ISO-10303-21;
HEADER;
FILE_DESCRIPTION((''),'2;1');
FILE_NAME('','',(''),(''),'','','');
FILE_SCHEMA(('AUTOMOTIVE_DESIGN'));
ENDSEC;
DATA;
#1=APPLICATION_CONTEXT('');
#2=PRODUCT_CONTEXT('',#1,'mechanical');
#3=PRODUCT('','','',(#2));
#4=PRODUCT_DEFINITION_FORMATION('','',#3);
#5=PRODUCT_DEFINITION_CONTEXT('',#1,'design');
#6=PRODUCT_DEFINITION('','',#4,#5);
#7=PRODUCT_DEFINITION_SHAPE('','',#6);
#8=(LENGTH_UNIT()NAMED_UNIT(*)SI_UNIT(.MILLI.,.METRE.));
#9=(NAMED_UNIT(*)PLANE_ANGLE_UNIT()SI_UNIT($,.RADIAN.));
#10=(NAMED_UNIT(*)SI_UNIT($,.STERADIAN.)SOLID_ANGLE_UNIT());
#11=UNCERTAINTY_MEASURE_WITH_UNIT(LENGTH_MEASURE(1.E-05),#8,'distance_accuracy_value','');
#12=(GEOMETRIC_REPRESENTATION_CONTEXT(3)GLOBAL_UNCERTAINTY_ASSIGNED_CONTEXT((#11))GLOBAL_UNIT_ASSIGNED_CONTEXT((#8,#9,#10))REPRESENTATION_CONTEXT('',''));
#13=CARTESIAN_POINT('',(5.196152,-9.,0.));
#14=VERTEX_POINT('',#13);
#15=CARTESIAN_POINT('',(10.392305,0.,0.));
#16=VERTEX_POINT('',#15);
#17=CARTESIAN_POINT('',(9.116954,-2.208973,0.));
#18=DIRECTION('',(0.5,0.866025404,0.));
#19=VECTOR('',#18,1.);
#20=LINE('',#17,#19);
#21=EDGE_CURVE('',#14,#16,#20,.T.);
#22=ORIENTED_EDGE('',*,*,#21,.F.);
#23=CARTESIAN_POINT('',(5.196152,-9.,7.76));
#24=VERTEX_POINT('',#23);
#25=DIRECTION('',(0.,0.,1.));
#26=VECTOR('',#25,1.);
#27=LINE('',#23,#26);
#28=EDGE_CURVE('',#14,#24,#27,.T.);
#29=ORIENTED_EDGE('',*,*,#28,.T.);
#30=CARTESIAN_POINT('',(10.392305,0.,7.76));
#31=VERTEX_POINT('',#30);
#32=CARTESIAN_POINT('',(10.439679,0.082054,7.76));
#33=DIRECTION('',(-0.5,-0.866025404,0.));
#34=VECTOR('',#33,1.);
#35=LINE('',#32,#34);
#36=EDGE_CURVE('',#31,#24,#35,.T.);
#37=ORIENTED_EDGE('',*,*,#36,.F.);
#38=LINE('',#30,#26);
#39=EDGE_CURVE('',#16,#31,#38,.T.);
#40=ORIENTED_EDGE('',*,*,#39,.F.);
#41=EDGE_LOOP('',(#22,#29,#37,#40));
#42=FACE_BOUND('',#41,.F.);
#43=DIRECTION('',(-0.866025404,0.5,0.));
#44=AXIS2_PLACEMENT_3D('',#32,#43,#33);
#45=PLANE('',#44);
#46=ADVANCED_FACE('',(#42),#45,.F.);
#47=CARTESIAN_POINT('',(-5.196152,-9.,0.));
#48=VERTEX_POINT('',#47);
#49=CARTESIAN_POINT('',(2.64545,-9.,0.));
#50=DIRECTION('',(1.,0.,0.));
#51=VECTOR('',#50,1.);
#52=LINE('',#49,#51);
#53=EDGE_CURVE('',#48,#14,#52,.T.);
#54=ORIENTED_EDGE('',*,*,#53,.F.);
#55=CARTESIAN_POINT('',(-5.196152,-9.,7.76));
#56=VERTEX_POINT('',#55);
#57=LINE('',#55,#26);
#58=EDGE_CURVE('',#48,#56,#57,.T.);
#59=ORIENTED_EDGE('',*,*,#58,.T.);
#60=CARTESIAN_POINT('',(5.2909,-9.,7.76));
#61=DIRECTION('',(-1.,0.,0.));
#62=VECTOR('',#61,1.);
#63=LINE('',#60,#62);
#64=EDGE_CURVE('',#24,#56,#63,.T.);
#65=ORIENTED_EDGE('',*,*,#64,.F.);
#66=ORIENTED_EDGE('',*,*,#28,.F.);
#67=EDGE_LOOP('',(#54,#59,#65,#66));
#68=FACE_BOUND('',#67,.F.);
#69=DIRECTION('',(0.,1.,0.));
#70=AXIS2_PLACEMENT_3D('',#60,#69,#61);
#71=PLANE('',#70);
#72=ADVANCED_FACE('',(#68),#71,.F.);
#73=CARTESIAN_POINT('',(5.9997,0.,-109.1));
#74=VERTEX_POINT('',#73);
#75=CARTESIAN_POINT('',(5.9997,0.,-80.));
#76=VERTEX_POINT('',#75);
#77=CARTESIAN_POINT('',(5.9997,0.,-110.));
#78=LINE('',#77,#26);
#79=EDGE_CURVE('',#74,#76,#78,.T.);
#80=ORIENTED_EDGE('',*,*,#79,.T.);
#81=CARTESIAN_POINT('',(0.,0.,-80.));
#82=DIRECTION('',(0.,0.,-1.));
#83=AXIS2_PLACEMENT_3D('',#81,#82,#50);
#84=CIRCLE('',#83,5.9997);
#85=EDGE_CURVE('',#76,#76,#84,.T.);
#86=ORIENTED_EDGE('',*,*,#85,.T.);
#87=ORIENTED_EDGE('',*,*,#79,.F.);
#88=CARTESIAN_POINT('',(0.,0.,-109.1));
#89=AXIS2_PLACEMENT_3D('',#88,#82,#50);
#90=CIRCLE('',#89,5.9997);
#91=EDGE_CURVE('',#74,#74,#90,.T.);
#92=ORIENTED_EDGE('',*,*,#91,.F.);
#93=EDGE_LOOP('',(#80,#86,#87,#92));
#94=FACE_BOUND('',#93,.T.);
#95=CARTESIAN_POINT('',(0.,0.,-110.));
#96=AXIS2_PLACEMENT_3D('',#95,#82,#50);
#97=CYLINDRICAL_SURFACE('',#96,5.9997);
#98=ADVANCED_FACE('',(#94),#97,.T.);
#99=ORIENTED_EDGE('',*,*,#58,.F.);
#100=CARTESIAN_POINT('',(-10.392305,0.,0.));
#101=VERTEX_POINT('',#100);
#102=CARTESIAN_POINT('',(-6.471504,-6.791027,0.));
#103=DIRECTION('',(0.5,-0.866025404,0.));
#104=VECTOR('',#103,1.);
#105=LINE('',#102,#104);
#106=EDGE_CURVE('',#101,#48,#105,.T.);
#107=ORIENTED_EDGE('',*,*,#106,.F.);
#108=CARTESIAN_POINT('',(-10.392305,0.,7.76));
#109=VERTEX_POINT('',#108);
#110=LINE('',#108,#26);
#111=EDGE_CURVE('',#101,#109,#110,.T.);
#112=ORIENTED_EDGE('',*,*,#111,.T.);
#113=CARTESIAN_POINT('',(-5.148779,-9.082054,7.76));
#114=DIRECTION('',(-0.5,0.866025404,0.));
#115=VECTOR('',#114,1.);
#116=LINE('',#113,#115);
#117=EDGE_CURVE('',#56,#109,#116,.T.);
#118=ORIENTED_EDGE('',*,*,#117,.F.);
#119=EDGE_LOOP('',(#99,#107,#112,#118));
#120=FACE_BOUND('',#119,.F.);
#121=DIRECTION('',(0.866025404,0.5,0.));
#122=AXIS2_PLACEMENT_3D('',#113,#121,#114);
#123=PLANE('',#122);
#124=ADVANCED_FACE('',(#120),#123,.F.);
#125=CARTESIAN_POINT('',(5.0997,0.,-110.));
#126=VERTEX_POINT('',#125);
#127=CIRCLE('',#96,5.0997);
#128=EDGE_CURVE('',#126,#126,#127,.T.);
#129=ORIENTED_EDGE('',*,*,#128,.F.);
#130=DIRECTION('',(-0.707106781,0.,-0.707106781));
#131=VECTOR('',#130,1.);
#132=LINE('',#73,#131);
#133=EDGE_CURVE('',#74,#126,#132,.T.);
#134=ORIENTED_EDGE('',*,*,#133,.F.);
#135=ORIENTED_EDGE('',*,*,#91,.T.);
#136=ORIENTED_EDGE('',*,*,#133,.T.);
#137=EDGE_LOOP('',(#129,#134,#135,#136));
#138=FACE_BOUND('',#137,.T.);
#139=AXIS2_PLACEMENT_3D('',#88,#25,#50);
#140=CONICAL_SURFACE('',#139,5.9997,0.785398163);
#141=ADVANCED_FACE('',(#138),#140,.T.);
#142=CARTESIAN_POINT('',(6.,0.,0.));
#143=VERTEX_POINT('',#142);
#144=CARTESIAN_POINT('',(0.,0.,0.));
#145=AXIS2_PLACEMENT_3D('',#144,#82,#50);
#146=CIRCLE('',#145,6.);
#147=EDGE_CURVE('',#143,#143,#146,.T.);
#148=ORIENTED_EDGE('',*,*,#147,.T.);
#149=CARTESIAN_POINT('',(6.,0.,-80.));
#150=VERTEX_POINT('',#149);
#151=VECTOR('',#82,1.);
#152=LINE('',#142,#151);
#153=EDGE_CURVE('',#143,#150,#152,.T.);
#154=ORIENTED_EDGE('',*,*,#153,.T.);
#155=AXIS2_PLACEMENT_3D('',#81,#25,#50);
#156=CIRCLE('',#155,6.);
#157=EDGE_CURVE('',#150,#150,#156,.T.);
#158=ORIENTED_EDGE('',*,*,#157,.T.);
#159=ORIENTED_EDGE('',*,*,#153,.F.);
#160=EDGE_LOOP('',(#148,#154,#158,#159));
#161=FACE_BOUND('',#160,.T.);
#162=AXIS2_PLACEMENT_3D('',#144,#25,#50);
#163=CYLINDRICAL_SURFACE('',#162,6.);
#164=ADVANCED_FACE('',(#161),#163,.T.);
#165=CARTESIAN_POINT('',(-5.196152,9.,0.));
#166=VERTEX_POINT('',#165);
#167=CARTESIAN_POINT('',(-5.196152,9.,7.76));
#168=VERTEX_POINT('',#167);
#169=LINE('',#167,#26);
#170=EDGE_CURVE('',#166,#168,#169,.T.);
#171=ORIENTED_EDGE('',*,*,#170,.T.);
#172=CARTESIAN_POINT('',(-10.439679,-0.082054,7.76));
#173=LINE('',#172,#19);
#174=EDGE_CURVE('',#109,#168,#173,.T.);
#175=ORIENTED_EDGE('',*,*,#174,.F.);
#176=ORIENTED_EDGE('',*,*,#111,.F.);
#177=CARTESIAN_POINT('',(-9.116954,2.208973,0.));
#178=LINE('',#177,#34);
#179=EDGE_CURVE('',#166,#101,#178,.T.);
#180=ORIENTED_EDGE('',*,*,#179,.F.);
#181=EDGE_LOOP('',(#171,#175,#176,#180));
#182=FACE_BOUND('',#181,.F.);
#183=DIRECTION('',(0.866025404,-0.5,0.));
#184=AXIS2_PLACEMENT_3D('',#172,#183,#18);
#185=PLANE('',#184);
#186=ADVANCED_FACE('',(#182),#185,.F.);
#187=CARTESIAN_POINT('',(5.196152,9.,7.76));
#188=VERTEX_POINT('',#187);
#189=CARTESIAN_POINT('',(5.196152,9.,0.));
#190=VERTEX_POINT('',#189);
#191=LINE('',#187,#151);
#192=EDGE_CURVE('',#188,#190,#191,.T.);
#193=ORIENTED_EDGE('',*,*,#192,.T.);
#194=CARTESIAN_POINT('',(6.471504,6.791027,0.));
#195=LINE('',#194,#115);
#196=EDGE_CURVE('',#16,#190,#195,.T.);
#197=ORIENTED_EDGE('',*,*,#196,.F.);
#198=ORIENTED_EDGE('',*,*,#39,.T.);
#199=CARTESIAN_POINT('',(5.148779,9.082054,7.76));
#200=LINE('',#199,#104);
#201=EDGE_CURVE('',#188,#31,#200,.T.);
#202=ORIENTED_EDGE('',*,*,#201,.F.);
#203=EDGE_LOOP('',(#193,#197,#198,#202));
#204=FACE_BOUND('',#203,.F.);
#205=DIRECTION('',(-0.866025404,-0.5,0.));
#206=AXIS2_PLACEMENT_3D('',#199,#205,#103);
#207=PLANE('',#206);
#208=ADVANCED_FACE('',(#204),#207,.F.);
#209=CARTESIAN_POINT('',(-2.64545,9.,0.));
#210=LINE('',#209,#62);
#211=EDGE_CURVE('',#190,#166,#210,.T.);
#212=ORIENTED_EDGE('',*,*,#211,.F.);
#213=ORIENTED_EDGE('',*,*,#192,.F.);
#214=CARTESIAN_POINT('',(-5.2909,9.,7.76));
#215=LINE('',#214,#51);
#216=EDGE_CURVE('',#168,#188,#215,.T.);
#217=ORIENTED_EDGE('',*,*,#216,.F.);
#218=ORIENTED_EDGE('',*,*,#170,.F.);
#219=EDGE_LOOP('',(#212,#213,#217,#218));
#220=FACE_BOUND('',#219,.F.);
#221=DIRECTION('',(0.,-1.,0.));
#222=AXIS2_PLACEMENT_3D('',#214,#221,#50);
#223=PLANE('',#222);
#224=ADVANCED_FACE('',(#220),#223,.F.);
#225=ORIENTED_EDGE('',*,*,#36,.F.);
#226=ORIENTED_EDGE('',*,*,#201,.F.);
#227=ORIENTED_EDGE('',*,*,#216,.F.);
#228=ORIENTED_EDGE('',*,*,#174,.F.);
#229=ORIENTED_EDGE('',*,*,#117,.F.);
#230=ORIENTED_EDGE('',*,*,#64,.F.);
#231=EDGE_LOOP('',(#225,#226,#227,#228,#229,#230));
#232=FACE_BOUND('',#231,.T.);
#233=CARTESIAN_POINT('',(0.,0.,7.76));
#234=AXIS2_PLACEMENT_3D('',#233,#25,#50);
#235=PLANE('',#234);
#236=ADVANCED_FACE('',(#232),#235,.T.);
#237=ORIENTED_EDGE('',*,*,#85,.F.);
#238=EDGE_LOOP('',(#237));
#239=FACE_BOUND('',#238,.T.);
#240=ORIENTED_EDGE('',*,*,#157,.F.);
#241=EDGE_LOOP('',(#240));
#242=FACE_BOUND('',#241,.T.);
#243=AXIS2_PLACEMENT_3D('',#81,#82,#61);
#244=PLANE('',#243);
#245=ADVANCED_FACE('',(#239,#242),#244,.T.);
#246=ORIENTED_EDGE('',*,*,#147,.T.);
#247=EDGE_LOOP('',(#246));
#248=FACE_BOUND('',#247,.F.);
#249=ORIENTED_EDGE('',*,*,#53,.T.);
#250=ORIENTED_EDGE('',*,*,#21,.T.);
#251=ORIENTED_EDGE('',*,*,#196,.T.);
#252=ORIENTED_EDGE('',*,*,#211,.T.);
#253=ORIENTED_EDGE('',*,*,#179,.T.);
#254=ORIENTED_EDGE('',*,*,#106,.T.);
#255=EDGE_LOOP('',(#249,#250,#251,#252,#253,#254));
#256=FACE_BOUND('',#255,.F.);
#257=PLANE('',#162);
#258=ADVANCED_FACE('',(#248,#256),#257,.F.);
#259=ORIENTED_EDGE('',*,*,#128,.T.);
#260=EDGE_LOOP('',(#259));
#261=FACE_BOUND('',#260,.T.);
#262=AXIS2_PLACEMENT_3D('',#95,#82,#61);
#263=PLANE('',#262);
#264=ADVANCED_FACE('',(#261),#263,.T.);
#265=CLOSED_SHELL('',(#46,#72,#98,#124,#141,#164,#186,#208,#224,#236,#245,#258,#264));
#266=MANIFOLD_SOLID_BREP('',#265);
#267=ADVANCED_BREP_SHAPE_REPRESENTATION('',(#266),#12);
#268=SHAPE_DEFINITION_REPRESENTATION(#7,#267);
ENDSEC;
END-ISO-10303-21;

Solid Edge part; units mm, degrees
sketch "Sketch1" plane through (0, 0, 0) normal (0, 0, 1) x (1, 0, 0)
  circle A0 centre (0, 0) radius 10.44
  dimension "D1" = 20.88
extrude "Protrusion1" add sketch "Sketch1" along normal blind 7.76
sketch "Sketch2" plane through (0, 0, 0) normal (0, 0, -1) x (1, 0, 0)
  circle A0 centre (0, 0) radius 6
extrude "Protrusion2" add sketch "Sketch2" along normal blind 110
sketch "Sketch3" plane through (0, 0, -110) normal (0, 0, -1) x (1, 0, 0)
  circle A0 centre (0, 0) radius 5.9997
extrude "Cutout1" cut sketch "Sketch3" against normal blind 30 flip side to cut
chamfer "Chamfer_1" distance 0.9 angle 45 1 edges at (-5.9997, 0, -110)
sketch "Sketch4" plane through (0, 0, 7.76) normal (0, 0, 1) x (1, 0, 0)
  line L0 (-5.2909, 9) -> (5.2909, 9)
  dimension "D1" = 18
extrude "Cutout2" cut sketch "Sketch4" against normal up to next material side at (0, 9.05, 7.76)
pattern_circular "Pattern1" count 6 over 360 about axis through (0, 0, 7.76) along (0, 0, 1) of "Cutout2"
properties part number "24104761"
